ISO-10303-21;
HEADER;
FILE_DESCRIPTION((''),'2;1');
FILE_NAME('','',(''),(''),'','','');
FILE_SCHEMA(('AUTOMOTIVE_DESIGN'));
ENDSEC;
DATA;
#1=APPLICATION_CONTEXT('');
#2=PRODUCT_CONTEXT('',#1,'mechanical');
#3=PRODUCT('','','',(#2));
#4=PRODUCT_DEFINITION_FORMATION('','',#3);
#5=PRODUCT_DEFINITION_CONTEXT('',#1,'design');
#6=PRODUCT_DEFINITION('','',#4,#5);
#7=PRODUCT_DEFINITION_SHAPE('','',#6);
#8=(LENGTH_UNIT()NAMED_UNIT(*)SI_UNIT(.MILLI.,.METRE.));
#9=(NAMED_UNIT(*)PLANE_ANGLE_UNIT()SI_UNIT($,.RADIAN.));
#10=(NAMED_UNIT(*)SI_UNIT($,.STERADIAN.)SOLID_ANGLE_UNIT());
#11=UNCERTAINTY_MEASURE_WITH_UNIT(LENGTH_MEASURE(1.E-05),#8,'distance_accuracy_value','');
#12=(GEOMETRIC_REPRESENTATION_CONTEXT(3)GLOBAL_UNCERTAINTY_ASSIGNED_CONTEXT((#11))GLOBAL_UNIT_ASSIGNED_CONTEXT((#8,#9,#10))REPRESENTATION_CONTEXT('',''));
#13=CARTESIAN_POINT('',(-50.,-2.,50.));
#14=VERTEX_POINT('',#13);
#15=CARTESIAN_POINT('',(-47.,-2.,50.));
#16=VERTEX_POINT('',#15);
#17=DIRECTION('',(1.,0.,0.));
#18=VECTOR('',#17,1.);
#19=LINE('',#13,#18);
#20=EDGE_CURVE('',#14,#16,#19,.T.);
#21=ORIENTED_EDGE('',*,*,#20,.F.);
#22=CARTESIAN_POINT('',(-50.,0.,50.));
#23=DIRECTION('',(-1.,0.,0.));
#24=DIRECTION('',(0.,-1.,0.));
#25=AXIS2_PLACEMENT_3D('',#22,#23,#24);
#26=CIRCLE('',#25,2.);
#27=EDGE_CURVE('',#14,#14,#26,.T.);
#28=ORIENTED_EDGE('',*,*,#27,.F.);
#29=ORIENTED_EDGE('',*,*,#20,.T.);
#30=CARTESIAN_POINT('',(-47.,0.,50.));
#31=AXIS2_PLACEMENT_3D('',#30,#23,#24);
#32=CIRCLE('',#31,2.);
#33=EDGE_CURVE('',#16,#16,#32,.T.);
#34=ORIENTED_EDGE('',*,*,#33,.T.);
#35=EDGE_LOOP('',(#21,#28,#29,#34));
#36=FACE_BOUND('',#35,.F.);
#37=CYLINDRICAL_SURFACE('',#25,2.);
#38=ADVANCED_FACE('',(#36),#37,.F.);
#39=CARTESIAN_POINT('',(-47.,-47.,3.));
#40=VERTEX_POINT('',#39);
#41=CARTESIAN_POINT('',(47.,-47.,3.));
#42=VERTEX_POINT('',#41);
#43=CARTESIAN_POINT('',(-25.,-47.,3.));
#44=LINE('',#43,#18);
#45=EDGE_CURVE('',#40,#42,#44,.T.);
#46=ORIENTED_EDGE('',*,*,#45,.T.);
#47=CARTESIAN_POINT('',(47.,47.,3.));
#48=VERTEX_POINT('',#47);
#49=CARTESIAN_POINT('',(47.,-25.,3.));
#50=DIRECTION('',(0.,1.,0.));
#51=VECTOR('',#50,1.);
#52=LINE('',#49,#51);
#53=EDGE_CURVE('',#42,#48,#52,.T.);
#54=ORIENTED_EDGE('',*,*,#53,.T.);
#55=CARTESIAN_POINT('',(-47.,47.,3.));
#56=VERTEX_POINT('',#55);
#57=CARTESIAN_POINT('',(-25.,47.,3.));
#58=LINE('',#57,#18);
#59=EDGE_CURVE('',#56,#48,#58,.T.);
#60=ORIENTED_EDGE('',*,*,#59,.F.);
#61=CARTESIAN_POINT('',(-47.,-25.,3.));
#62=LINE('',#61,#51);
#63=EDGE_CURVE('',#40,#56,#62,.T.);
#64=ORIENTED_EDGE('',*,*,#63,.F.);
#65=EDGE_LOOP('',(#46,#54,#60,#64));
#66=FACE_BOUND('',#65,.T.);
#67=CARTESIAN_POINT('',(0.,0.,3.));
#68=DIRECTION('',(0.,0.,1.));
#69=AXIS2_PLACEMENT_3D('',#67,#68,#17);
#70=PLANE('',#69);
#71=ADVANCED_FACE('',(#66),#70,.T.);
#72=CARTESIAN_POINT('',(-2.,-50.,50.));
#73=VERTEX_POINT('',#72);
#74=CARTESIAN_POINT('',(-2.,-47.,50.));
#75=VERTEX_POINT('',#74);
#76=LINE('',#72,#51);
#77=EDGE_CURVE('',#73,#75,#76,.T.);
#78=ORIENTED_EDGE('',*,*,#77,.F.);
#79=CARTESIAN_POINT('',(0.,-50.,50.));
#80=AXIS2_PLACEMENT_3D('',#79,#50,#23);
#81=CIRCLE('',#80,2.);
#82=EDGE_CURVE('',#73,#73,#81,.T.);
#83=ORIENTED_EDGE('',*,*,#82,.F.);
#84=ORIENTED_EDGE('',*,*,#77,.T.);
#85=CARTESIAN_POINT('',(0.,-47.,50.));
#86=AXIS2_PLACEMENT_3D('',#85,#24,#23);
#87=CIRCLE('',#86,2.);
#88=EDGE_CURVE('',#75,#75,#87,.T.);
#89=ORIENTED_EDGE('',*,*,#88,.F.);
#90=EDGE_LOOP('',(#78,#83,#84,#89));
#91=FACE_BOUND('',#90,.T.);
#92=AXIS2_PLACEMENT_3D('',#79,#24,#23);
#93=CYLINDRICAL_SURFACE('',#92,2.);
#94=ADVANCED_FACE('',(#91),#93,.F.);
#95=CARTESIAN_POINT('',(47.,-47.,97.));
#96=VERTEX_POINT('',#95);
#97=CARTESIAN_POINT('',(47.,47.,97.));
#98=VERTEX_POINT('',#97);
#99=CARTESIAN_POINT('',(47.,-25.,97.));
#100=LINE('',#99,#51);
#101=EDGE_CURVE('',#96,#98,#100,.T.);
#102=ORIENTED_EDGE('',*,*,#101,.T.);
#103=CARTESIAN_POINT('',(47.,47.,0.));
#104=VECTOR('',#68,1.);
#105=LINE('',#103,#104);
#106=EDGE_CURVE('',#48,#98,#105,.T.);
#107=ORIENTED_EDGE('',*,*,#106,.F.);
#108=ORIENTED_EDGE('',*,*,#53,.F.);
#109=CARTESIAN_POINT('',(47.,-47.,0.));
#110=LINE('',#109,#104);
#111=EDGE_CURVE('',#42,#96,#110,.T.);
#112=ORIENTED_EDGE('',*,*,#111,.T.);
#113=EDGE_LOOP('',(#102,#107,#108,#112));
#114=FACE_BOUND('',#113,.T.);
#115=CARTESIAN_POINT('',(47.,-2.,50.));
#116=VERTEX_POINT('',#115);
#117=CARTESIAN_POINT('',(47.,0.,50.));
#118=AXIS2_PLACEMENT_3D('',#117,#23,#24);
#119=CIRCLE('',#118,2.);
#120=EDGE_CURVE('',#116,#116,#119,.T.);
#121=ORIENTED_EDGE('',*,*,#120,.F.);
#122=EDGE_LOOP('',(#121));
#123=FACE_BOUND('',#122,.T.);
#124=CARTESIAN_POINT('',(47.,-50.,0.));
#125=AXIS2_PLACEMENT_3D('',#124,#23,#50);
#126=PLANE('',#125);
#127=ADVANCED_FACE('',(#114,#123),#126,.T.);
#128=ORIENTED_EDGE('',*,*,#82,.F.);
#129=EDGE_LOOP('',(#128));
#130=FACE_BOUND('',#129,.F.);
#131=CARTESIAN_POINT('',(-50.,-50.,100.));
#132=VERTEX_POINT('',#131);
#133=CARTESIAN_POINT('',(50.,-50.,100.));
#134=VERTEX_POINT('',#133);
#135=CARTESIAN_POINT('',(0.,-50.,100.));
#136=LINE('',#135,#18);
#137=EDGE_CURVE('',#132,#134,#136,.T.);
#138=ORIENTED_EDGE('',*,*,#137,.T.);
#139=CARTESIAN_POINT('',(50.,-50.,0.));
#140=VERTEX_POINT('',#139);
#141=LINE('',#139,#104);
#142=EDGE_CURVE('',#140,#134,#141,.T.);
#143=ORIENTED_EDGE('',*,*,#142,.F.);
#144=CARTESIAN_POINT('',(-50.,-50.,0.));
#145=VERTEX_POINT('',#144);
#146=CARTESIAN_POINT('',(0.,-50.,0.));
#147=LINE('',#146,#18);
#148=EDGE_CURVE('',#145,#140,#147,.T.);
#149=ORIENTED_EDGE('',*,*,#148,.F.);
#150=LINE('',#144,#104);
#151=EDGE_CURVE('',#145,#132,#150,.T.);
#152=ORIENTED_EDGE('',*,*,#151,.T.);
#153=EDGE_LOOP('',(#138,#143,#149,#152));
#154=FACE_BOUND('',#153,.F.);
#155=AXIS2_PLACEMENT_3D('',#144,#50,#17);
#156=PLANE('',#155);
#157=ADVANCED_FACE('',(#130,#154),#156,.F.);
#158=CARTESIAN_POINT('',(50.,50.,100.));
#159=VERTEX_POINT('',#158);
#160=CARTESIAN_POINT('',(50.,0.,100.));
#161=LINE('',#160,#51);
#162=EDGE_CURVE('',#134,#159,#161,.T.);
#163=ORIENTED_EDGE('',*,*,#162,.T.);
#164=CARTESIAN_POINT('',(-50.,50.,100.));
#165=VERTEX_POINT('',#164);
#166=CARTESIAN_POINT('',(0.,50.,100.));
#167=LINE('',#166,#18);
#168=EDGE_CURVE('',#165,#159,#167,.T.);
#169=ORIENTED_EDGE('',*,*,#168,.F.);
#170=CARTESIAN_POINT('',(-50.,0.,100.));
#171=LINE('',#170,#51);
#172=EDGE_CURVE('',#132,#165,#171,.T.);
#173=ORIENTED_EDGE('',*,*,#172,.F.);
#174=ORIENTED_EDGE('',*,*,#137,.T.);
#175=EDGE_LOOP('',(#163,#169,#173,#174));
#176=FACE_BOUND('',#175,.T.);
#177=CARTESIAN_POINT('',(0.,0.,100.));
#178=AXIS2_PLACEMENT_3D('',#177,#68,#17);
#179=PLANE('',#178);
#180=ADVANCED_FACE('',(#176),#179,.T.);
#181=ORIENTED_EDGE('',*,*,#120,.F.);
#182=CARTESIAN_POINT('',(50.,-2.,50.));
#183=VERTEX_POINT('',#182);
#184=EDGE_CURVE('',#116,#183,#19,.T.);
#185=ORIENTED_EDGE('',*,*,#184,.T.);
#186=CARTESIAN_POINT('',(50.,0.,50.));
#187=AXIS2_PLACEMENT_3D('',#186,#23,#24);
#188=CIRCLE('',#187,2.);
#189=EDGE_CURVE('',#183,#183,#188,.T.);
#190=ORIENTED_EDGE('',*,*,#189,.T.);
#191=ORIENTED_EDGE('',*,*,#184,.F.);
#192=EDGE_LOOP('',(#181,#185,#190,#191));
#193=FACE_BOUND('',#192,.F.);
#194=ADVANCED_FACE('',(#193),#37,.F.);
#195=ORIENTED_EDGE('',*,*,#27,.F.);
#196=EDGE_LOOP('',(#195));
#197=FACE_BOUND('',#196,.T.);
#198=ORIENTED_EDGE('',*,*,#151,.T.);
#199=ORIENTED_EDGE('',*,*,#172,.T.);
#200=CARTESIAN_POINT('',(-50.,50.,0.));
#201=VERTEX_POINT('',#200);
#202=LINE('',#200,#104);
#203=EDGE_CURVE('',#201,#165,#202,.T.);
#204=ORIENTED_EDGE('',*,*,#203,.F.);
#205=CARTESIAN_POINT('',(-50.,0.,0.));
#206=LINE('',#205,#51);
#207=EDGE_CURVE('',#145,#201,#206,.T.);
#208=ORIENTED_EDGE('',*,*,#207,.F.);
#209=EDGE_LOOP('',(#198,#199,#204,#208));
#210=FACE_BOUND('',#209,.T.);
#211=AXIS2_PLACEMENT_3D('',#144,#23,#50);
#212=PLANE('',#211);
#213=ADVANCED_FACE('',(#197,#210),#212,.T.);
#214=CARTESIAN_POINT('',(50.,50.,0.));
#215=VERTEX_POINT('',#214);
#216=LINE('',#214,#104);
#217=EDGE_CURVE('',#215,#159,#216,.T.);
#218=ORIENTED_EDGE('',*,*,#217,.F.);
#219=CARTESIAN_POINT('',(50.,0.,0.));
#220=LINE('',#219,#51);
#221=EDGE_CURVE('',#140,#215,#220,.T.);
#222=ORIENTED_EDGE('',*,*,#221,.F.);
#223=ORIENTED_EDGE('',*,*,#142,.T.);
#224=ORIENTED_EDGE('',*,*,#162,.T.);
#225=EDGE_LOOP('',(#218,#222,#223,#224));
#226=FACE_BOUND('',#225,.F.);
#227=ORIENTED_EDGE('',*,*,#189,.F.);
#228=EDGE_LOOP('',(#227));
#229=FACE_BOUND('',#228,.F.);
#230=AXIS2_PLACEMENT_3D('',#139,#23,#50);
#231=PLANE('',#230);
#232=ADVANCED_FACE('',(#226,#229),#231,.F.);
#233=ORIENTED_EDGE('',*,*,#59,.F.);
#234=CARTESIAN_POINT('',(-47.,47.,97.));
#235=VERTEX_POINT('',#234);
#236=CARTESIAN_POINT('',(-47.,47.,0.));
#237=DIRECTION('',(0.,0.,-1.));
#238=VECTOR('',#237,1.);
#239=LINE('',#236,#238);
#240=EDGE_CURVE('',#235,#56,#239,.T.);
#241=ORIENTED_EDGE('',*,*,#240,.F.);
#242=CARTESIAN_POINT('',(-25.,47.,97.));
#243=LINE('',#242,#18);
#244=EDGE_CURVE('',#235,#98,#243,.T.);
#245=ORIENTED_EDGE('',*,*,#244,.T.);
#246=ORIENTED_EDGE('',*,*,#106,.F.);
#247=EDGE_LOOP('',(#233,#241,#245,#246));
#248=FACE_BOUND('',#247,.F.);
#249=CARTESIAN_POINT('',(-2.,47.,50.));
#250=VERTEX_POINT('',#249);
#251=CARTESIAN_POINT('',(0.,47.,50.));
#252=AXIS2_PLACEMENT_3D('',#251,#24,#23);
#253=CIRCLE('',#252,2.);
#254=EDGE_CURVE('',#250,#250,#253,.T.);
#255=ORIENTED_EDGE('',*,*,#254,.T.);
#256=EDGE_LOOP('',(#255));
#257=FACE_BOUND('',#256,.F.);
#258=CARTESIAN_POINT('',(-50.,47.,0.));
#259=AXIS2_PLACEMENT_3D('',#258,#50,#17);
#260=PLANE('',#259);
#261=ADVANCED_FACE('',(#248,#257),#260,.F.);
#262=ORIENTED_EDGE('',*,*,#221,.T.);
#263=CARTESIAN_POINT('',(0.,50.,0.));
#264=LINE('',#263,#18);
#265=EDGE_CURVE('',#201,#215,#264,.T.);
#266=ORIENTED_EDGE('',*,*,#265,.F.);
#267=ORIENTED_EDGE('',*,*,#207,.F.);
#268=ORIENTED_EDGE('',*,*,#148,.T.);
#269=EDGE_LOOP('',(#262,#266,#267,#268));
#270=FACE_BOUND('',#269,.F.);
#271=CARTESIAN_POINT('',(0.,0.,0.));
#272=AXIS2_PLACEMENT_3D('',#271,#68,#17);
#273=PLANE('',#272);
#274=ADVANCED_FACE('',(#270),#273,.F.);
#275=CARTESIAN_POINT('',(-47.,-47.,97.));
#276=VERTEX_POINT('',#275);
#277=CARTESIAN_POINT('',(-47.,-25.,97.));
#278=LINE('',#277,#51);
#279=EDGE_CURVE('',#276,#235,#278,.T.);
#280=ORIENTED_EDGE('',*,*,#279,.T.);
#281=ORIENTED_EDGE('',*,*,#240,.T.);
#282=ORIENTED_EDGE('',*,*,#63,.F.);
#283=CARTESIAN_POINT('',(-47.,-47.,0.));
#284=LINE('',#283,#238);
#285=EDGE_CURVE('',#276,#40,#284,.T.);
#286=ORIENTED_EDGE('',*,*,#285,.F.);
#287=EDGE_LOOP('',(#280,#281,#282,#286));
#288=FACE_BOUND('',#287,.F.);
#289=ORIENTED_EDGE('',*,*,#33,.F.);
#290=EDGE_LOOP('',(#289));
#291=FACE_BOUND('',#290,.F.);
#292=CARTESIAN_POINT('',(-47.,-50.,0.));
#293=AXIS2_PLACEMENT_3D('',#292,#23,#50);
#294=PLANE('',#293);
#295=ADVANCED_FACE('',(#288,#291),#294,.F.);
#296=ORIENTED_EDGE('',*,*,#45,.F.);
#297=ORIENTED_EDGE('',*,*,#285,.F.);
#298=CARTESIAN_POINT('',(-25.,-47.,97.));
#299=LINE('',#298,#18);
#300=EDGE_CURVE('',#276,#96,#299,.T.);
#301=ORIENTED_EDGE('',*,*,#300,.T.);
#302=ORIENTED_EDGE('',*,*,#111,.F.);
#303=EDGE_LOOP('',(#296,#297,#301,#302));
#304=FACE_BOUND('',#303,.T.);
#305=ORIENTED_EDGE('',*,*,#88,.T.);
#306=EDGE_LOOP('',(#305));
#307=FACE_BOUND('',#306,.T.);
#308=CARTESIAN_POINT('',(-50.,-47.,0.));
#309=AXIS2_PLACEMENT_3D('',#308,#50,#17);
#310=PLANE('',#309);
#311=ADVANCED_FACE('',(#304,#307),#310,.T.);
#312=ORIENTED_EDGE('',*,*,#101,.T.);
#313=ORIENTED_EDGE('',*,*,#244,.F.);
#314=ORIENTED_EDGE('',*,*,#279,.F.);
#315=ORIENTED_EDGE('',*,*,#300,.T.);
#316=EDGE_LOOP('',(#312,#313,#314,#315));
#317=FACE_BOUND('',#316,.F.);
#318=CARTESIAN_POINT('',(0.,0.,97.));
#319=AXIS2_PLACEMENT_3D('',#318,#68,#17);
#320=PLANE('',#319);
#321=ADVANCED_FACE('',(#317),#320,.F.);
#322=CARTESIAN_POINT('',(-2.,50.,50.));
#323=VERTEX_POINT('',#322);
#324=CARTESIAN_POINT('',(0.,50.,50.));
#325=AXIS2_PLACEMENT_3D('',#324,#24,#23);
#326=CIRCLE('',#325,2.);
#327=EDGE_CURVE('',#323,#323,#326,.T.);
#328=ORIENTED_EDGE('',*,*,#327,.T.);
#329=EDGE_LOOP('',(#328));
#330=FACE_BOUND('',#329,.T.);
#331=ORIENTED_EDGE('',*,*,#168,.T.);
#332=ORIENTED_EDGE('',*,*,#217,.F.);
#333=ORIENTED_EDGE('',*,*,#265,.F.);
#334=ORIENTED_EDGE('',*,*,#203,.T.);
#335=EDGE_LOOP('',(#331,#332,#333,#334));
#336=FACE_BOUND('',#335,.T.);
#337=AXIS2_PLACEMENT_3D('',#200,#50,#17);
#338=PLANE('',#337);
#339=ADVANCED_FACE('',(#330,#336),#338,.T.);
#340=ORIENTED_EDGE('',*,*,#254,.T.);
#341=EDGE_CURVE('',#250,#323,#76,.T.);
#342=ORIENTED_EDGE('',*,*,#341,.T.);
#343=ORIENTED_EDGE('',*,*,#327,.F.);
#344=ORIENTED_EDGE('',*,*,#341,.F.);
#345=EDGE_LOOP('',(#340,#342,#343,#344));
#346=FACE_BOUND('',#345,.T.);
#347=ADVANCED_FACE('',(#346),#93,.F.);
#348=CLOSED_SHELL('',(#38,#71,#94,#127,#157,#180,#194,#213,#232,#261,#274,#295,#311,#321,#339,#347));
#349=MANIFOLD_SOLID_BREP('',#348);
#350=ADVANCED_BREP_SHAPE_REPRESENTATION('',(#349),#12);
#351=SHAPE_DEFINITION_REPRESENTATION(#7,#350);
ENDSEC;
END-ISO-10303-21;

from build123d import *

# Parameters (mm, degrees)
F0_W     = 100
F0_H     = 100
F1_DEPTH = 100
F2_T     = -3
F3_R     = 2
F4_DEPTH = 100.001


# Not quite as in the source:
# - a pattern or mirror of a feature is missing from the dataset's text; its kind, count and spacing are read off the source's solid


with BuildPart() as f1:
    # F0 (on Top) → F1 (new body)
    with BuildSketch(Plane.XY):
        Rectangle(F0_W, F0_H)
    extrude(amount=F1_DEPTH)

    # F2 (hollow: no face is removed)
    offset(amount=F2_T, mode=Mode.SUBTRACT)

    # F3 (on face) → F4 (cut, through all)
    with BuildSketch(Plane(origin=(-50, 0, 0), x_dir=(0, -1, 0), z_dir=(-1, 0, 0))):
        with Locations((0, 50)):
            Circle(F3_R)
    f4 = extrude(amount=-F4_DEPTH, mode=Mode.SUBTRACT)

    # F4_copies: F4 across plane
    add(f4.mirror(Plane(origin=(0, 0, 0), x_dir=(0.7071067812, 0.7071067812, 0), z_dir=(-0.7071067812, 0.7071067812, 0))), mode=Mode.SUBTRACT)


solid = f1.part
